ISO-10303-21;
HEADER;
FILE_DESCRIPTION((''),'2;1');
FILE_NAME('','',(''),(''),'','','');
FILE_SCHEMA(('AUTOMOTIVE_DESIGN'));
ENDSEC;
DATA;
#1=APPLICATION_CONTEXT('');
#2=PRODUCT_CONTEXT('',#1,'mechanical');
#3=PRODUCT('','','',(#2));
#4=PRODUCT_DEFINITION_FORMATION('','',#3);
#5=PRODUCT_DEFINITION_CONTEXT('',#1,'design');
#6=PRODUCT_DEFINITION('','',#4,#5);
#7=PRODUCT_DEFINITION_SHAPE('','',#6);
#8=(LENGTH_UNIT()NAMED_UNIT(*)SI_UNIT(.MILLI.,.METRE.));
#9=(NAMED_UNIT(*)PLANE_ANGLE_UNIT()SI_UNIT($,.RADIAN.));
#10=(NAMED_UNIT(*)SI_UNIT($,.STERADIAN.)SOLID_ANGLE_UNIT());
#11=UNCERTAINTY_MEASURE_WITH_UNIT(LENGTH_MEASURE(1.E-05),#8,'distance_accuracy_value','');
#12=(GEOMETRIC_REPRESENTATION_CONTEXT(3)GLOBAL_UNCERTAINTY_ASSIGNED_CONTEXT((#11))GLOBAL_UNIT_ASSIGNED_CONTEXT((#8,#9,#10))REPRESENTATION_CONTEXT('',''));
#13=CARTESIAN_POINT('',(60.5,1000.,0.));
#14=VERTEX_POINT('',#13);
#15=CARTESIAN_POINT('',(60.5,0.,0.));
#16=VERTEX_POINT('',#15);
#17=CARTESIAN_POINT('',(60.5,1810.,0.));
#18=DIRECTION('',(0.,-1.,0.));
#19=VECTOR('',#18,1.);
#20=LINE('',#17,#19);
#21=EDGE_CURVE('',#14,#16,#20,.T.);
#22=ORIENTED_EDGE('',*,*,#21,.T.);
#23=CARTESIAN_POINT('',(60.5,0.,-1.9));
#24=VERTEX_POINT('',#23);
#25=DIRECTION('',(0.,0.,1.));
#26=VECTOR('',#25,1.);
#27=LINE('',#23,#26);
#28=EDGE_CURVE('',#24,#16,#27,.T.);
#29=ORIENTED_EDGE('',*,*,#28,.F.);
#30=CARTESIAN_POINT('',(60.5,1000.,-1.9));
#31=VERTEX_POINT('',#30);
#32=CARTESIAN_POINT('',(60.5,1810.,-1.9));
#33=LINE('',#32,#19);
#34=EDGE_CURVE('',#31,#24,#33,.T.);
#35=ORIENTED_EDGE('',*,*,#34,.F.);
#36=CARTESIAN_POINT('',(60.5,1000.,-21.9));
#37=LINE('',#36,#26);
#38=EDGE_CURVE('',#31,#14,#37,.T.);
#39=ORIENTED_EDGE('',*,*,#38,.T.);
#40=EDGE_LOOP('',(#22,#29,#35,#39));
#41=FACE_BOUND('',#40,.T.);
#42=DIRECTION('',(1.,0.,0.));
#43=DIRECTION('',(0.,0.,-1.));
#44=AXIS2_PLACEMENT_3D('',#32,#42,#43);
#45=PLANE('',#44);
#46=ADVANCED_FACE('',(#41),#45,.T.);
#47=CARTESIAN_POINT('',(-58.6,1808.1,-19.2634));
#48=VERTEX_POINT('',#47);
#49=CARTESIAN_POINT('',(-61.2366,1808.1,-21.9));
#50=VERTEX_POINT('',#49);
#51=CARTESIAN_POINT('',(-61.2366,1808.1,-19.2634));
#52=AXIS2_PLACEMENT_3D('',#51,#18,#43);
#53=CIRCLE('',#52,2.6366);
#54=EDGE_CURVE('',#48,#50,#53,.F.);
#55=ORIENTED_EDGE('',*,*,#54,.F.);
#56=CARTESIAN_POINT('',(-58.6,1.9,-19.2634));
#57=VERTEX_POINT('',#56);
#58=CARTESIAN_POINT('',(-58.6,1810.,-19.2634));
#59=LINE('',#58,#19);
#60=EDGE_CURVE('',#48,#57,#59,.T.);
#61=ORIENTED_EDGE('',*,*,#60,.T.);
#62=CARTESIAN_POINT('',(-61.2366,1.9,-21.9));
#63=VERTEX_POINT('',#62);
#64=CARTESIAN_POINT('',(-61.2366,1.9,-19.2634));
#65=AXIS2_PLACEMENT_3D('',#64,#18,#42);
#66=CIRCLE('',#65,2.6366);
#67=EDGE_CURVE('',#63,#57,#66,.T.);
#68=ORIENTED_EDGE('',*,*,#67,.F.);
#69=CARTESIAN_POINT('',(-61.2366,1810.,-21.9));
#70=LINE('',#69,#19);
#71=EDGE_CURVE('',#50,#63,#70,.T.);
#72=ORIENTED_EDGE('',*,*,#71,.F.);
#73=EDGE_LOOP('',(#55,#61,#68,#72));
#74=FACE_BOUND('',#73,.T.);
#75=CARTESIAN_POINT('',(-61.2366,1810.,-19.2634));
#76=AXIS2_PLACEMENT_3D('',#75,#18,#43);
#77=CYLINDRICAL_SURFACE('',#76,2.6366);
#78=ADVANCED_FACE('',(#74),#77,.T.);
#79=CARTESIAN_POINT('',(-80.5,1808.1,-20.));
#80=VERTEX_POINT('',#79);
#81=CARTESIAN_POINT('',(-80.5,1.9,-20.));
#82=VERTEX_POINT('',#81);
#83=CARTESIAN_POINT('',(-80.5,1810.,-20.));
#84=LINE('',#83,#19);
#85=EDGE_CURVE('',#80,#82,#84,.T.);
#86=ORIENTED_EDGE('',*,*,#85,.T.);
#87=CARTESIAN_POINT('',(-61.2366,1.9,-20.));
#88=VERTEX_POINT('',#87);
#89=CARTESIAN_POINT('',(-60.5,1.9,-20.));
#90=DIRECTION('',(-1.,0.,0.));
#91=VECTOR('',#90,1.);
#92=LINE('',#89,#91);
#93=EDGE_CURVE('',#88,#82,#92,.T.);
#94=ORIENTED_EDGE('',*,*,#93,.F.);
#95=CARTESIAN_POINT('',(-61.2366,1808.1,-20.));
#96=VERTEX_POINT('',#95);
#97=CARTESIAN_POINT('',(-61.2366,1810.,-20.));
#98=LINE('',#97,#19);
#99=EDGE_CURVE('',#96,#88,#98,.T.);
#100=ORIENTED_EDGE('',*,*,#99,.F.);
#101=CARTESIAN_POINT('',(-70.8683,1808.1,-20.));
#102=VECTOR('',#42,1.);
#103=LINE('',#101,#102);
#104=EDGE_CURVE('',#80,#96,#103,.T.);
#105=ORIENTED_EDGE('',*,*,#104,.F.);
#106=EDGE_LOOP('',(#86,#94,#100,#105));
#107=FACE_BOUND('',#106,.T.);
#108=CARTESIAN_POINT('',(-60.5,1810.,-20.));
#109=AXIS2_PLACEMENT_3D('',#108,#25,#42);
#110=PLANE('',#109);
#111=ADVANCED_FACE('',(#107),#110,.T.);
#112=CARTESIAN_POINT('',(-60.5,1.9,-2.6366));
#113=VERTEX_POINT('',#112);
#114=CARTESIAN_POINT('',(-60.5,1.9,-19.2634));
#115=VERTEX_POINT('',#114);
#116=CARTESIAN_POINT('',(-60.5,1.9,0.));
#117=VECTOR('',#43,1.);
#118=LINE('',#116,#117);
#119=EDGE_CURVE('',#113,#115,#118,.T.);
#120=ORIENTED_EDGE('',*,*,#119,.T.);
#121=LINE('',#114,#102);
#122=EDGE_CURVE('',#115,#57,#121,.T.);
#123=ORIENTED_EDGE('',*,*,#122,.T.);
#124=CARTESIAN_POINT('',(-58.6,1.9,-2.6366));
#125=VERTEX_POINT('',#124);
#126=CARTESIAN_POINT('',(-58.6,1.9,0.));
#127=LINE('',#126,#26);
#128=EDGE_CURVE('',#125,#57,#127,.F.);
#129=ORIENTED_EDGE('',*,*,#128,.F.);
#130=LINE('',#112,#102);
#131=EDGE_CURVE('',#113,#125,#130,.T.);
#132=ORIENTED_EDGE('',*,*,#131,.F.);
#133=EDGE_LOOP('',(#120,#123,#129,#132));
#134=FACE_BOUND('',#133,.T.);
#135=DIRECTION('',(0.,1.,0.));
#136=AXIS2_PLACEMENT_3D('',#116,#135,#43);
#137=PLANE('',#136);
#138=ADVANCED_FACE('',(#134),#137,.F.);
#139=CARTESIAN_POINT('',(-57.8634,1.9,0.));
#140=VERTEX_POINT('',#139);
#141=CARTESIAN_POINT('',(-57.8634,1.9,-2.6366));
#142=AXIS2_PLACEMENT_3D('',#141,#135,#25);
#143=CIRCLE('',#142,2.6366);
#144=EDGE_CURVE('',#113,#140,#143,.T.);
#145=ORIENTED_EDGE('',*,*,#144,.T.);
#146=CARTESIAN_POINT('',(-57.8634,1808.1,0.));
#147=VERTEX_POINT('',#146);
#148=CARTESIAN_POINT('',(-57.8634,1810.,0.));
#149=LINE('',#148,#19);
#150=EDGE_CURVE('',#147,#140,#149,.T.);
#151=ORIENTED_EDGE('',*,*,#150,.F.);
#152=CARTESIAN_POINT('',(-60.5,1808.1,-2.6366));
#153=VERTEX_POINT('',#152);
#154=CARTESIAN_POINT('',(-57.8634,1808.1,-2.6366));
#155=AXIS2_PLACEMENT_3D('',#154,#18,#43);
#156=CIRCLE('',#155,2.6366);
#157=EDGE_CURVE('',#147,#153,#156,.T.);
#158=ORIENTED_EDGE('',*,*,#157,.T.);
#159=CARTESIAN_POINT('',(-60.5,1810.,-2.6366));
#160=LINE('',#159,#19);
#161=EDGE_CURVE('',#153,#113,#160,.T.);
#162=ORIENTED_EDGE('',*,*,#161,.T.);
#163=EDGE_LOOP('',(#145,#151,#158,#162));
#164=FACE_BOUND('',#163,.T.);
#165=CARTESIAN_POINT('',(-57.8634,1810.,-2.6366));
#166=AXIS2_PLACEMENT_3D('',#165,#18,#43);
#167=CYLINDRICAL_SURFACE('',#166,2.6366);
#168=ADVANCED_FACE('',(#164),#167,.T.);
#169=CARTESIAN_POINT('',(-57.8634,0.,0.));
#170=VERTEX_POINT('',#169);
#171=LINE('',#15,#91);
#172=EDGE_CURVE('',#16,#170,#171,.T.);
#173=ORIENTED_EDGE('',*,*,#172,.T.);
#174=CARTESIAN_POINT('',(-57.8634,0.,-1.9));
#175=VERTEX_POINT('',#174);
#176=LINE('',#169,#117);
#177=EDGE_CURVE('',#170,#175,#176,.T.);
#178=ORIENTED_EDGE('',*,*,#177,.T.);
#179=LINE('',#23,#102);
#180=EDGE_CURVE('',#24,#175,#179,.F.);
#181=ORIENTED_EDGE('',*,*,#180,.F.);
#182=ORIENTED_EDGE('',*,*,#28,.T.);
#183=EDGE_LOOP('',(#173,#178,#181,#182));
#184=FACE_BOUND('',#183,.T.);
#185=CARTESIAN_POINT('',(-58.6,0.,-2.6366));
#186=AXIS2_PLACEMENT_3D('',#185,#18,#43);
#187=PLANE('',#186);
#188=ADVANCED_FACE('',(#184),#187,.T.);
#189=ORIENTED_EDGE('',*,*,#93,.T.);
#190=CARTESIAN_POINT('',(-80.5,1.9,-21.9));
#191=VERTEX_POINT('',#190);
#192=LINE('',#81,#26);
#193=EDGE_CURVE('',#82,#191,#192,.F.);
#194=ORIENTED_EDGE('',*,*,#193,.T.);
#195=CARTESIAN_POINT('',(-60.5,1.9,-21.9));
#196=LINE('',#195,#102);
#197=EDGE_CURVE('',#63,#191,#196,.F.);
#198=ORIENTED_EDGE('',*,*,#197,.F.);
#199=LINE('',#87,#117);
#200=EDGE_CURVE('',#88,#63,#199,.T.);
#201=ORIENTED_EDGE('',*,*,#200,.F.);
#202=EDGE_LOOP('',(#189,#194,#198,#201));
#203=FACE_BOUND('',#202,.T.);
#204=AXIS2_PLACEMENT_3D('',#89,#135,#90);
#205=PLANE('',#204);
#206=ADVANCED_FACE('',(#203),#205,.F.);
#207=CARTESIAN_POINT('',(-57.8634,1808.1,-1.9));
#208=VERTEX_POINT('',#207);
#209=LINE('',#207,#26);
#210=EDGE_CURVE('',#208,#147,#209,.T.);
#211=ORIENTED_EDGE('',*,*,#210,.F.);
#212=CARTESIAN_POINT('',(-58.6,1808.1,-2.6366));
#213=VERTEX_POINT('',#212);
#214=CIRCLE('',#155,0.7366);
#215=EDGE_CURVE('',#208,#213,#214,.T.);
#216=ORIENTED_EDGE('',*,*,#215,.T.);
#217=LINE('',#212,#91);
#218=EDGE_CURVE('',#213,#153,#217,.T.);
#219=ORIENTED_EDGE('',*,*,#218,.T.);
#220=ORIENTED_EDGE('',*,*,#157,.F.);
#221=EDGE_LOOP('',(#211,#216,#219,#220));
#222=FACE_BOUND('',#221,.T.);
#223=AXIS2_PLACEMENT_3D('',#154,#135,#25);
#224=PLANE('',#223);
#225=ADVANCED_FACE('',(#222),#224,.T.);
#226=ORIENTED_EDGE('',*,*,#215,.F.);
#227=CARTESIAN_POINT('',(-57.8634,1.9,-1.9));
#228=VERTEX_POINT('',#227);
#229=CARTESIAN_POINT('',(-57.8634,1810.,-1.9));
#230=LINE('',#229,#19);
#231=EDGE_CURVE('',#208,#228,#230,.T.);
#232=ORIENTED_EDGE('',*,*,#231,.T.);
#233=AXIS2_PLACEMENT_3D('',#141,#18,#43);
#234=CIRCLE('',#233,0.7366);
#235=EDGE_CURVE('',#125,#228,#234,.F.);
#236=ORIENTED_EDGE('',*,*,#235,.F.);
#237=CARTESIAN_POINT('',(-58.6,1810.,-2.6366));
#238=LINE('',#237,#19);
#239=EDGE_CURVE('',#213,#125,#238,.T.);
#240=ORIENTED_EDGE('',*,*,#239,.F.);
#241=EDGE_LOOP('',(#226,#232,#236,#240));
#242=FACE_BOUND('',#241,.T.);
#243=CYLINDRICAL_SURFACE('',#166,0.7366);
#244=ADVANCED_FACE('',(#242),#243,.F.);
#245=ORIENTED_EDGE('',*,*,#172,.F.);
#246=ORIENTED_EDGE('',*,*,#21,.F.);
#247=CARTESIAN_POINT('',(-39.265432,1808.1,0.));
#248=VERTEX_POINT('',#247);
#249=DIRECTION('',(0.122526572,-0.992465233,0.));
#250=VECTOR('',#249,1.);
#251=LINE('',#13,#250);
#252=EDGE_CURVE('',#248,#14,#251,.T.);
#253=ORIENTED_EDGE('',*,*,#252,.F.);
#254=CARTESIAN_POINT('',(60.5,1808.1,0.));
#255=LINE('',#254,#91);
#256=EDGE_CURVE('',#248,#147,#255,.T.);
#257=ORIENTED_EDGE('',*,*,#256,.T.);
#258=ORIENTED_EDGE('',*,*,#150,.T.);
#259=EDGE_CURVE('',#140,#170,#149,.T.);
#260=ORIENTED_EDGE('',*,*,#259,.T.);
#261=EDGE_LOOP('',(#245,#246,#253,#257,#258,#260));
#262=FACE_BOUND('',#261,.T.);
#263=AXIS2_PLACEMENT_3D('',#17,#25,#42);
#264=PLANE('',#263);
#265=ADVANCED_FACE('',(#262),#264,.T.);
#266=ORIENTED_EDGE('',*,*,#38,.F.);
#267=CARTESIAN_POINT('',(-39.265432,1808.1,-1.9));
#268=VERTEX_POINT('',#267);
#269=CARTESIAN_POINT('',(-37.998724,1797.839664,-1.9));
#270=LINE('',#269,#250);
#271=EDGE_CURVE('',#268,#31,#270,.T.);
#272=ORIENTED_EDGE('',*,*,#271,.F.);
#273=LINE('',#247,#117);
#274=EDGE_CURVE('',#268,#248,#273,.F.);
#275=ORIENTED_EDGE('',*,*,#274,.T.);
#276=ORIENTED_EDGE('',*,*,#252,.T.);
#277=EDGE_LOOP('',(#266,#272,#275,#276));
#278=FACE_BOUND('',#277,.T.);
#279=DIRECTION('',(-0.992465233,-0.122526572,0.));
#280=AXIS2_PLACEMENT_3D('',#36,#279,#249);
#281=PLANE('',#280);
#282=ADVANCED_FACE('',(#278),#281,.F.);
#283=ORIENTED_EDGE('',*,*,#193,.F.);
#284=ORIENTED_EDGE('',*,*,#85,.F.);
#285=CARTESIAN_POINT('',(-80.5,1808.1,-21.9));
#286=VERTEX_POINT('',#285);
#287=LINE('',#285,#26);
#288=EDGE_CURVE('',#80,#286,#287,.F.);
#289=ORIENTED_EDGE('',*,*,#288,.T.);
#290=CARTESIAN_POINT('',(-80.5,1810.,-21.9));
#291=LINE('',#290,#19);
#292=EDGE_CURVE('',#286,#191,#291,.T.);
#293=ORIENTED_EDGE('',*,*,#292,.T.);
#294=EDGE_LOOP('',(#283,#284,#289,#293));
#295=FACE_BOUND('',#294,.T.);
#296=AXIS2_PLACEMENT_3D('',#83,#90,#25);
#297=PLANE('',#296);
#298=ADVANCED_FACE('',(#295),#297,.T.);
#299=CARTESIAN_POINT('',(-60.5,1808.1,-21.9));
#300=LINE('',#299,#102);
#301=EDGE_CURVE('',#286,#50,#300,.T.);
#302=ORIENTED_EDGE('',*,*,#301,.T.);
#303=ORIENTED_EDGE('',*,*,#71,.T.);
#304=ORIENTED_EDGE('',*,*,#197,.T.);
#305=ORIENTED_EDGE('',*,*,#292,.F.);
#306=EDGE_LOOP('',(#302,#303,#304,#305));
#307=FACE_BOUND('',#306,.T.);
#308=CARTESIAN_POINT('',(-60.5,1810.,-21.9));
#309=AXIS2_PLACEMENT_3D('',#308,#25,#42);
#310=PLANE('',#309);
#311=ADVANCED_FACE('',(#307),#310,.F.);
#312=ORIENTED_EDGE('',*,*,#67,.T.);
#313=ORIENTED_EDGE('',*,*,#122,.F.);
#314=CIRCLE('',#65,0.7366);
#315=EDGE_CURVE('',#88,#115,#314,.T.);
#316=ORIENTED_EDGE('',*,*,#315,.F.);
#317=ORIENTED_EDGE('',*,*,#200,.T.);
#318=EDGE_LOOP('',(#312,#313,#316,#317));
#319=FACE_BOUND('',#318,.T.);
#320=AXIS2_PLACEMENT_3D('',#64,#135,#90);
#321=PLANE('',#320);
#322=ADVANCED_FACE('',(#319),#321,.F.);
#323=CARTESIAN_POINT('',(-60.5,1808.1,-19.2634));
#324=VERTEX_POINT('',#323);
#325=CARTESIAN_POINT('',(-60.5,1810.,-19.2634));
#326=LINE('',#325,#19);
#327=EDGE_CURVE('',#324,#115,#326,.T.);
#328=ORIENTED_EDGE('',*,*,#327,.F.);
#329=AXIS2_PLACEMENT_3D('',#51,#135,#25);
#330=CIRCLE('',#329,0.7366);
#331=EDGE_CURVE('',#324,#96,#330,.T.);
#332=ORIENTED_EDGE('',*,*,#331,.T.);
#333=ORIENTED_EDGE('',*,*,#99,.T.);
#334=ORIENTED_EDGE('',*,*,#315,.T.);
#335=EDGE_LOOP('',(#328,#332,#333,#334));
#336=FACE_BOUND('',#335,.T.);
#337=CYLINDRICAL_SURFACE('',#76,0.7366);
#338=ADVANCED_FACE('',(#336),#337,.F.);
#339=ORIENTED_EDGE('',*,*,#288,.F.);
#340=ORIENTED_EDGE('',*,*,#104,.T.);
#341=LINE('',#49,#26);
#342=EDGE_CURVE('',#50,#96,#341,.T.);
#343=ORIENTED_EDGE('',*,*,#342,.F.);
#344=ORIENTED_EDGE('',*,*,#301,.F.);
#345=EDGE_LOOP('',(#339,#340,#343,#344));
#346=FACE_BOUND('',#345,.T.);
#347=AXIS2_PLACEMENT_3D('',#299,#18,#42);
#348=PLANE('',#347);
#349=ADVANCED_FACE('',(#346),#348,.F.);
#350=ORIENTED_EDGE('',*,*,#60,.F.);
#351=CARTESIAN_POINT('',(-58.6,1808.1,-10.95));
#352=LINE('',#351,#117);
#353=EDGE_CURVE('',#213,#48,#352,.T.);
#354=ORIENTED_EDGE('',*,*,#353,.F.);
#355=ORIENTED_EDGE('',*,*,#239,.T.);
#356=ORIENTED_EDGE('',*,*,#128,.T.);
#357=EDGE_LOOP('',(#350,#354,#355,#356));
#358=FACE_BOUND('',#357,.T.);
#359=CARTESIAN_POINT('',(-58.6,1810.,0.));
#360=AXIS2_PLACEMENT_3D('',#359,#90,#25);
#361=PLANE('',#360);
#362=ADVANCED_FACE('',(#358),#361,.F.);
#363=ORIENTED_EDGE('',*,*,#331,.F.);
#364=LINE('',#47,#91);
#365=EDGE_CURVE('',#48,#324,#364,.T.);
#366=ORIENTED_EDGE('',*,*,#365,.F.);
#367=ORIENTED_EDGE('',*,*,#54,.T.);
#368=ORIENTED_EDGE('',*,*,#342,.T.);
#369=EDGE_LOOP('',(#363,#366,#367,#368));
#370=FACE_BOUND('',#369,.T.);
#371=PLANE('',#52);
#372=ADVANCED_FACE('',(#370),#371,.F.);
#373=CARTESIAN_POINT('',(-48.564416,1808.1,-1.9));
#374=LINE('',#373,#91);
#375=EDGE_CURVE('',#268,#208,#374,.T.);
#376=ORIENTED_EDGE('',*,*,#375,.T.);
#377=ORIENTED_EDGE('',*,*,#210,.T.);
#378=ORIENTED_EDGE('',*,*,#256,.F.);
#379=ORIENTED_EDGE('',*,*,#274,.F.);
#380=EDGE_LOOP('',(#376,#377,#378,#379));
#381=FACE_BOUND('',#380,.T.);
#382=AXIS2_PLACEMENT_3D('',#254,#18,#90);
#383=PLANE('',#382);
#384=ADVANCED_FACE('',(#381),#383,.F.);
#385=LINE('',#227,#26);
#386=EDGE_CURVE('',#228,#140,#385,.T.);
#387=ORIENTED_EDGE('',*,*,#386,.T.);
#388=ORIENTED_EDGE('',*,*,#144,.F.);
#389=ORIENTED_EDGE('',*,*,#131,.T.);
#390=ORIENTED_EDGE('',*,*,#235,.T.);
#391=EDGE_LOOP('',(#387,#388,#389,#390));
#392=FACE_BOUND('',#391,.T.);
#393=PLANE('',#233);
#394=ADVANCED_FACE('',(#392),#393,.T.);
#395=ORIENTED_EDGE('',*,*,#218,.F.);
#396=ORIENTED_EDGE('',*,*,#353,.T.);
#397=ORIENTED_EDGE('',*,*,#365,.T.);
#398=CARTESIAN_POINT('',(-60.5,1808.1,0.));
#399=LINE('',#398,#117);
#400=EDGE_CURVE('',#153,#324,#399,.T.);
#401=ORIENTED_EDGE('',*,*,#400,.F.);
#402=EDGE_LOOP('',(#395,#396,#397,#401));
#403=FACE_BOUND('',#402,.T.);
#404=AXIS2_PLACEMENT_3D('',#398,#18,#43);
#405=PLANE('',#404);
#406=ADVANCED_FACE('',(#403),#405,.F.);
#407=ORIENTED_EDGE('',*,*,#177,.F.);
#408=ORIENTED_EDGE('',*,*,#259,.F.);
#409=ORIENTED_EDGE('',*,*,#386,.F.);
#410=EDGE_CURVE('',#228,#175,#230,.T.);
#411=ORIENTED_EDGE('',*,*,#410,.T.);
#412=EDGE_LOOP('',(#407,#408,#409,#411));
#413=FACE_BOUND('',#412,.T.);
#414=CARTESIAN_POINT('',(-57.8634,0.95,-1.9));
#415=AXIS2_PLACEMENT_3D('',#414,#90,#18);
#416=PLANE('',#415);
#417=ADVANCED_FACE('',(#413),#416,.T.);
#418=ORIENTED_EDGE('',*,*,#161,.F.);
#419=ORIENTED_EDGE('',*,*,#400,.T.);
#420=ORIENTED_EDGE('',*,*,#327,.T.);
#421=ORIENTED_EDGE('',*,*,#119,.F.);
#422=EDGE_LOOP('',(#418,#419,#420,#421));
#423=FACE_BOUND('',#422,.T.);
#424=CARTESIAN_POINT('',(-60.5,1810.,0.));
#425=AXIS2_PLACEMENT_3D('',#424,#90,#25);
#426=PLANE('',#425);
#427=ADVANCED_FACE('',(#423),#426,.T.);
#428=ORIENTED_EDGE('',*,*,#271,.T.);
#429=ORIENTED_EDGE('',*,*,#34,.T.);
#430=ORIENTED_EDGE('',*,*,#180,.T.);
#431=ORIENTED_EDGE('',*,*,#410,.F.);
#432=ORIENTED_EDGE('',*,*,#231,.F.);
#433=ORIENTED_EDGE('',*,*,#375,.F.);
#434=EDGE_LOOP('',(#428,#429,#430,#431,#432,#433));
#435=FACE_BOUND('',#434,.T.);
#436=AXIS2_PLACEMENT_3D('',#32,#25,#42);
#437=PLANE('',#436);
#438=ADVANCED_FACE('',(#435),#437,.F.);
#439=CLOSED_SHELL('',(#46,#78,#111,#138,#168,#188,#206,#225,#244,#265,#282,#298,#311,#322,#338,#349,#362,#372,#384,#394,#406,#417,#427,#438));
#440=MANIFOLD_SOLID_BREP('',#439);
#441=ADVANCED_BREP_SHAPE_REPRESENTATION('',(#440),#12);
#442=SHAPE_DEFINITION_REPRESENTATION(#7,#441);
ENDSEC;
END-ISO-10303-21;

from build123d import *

# Parameters (mm, degrees)
BRIDA_BASE4_DEPTH          = 1810
CORTAR_EXTRUIR1_DEPTH      = 1812.921593226
CORTAR_EXTRUIR1_DEPTH_BACK = 1812.921593226
CORTAR_EXTRUIR2_DEPTH      = 1.9
CORTAR_EXTRUIR3_DEPTH      = 1812.899624703
CORTAR_EXTRUIR3_DEPTH_BACK = 1812.899624703
CROQUIS22_W                = 55.247943396
CROQUIS22_H                = 1.9


# Read off the part's stored shape, not the designer's step: Cortar-Extruir2
# Sheet-metal steps are written as plain solids
with BuildPart() as part:
    # Croquis1 → Brida base4 (new body)
    with BuildSketch(Plane(origin=(0, 0, 0), x_dir=(1, 0, 0), z_dir=(0, 1, 0))):
        with BuildLine():
            Line((60.5, 0), (-57.8634, 0))
            ThreePointArc((-57.8634, 0), (-59.727757739, 0.772242261), (-60.5, 2.6366))
            Line((-60.5, 2.6366), (-60.5, 19.2634))
            ThreePointArc((-60.5, 19.2634), (-60.715745145, 19.784254855), (-61.2366, 20))
            Line((-61.2366, 20), (-80.5, 20))
            Line((-80.5, 20), (-80.5, 21.9))
            Line((-80.5, 21.9), (-61.2366, 21.9))
            ThreePointArc((-61.2366, 21.9), (-59.372242261, 21.127757739), (-58.6, 19.2634))
            Line((-58.6, 19.2634), (-58.6, 2.6366))
            ThreePointArc((-58.6, 2.6366), (-58.384254855, 2.115745145), (-57.8634, 1.9))
            Line((-57.8634, 1.9), (60.5, 1.9))
            Line((60.5, 1.9), (60.5, 0))
        make_face()
    extrude(amount=BRIDA_BASE4_DEPTH)

    # Croquis19 → Cortar-Extruir1 (cut, two sides: drawn at the far end of the back side and taken through both)
    with BuildSketch(Plane.XY.offset(-CORTAR_EXTRUIR1_DEPTH_BACK)):
        Polygon((60.5, 1000), (-39.5, 1810), (-39.5, 1900.089959651), (60.5, 1900.089959651), align=None)
    extrude(amount=CORTAR_EXTRUIR1_DEPTH + CORTAR_EXTRUIR1_DEPTH_BACK, mode=Mode.SUBTRACT)

    # Cortar-Extruir2 outline → Cortar-Extruir2 (cut)
    with BuildSketch(Plane(origin=(0, 0, 0), x_dir=(1, 0, 0), z_dir=(0, 1, 0))):
        with BuildLine():
            Line((-57.8634, 0), (-57.8634, 1.9))
            ThreePointArc((-57.8634, 1.9), (-58.384254855, 2.115745145), (-58.6, 2.6366))
            Line((-58.6, 2.6366), (-58.6, 19.2634))
            ThreePointArc((-58.6, 19.2634), (-59.372242261, 21.127757739), (-61.2366, 21.9))
            Line((-61.2366, 21.9), (-80.5, 21.9))
            Line((-80.5, 21.9), (-80.5, 20))
            Line((-80.5, 20), (-61.2366, 20))
            ThreePointArc((-61.2366, 20), (-60.715745145, 19.784254855), (-60.5, 19.2634))
            Line((-60.5, 19.2634), (-60.5, 2.6366))
            ThreePointArc((-60.5, 2.6366), (-59.727757739, 0.772242261), (-57.8634, 0))
        make_face()
    extrude(amount=CORTAR_EXTRUIR2_DEPTH, mode=Mode.SUBTRACT)

    # Croquis22 → Cortar-Extruir3 (cut, two sides: drawn at the far end of the back side and taken through both)
    with BuildSketch(Plane.XY.offset(-20).offset(-CORTAR_EXTRUIR3_DEPTH_BACK)):
        with Locations((-52.876028302, 1809.05)):
            Rectangle(CROQUIS22_W, CROQUIS22_H)
    extrude(amount=CORTAR_EXTRUIR3_DEPTH + CORTAR_EXTRUIR3_DEPTH_BACK, mode=Mode.SUBTRACT)


solid = part.part
